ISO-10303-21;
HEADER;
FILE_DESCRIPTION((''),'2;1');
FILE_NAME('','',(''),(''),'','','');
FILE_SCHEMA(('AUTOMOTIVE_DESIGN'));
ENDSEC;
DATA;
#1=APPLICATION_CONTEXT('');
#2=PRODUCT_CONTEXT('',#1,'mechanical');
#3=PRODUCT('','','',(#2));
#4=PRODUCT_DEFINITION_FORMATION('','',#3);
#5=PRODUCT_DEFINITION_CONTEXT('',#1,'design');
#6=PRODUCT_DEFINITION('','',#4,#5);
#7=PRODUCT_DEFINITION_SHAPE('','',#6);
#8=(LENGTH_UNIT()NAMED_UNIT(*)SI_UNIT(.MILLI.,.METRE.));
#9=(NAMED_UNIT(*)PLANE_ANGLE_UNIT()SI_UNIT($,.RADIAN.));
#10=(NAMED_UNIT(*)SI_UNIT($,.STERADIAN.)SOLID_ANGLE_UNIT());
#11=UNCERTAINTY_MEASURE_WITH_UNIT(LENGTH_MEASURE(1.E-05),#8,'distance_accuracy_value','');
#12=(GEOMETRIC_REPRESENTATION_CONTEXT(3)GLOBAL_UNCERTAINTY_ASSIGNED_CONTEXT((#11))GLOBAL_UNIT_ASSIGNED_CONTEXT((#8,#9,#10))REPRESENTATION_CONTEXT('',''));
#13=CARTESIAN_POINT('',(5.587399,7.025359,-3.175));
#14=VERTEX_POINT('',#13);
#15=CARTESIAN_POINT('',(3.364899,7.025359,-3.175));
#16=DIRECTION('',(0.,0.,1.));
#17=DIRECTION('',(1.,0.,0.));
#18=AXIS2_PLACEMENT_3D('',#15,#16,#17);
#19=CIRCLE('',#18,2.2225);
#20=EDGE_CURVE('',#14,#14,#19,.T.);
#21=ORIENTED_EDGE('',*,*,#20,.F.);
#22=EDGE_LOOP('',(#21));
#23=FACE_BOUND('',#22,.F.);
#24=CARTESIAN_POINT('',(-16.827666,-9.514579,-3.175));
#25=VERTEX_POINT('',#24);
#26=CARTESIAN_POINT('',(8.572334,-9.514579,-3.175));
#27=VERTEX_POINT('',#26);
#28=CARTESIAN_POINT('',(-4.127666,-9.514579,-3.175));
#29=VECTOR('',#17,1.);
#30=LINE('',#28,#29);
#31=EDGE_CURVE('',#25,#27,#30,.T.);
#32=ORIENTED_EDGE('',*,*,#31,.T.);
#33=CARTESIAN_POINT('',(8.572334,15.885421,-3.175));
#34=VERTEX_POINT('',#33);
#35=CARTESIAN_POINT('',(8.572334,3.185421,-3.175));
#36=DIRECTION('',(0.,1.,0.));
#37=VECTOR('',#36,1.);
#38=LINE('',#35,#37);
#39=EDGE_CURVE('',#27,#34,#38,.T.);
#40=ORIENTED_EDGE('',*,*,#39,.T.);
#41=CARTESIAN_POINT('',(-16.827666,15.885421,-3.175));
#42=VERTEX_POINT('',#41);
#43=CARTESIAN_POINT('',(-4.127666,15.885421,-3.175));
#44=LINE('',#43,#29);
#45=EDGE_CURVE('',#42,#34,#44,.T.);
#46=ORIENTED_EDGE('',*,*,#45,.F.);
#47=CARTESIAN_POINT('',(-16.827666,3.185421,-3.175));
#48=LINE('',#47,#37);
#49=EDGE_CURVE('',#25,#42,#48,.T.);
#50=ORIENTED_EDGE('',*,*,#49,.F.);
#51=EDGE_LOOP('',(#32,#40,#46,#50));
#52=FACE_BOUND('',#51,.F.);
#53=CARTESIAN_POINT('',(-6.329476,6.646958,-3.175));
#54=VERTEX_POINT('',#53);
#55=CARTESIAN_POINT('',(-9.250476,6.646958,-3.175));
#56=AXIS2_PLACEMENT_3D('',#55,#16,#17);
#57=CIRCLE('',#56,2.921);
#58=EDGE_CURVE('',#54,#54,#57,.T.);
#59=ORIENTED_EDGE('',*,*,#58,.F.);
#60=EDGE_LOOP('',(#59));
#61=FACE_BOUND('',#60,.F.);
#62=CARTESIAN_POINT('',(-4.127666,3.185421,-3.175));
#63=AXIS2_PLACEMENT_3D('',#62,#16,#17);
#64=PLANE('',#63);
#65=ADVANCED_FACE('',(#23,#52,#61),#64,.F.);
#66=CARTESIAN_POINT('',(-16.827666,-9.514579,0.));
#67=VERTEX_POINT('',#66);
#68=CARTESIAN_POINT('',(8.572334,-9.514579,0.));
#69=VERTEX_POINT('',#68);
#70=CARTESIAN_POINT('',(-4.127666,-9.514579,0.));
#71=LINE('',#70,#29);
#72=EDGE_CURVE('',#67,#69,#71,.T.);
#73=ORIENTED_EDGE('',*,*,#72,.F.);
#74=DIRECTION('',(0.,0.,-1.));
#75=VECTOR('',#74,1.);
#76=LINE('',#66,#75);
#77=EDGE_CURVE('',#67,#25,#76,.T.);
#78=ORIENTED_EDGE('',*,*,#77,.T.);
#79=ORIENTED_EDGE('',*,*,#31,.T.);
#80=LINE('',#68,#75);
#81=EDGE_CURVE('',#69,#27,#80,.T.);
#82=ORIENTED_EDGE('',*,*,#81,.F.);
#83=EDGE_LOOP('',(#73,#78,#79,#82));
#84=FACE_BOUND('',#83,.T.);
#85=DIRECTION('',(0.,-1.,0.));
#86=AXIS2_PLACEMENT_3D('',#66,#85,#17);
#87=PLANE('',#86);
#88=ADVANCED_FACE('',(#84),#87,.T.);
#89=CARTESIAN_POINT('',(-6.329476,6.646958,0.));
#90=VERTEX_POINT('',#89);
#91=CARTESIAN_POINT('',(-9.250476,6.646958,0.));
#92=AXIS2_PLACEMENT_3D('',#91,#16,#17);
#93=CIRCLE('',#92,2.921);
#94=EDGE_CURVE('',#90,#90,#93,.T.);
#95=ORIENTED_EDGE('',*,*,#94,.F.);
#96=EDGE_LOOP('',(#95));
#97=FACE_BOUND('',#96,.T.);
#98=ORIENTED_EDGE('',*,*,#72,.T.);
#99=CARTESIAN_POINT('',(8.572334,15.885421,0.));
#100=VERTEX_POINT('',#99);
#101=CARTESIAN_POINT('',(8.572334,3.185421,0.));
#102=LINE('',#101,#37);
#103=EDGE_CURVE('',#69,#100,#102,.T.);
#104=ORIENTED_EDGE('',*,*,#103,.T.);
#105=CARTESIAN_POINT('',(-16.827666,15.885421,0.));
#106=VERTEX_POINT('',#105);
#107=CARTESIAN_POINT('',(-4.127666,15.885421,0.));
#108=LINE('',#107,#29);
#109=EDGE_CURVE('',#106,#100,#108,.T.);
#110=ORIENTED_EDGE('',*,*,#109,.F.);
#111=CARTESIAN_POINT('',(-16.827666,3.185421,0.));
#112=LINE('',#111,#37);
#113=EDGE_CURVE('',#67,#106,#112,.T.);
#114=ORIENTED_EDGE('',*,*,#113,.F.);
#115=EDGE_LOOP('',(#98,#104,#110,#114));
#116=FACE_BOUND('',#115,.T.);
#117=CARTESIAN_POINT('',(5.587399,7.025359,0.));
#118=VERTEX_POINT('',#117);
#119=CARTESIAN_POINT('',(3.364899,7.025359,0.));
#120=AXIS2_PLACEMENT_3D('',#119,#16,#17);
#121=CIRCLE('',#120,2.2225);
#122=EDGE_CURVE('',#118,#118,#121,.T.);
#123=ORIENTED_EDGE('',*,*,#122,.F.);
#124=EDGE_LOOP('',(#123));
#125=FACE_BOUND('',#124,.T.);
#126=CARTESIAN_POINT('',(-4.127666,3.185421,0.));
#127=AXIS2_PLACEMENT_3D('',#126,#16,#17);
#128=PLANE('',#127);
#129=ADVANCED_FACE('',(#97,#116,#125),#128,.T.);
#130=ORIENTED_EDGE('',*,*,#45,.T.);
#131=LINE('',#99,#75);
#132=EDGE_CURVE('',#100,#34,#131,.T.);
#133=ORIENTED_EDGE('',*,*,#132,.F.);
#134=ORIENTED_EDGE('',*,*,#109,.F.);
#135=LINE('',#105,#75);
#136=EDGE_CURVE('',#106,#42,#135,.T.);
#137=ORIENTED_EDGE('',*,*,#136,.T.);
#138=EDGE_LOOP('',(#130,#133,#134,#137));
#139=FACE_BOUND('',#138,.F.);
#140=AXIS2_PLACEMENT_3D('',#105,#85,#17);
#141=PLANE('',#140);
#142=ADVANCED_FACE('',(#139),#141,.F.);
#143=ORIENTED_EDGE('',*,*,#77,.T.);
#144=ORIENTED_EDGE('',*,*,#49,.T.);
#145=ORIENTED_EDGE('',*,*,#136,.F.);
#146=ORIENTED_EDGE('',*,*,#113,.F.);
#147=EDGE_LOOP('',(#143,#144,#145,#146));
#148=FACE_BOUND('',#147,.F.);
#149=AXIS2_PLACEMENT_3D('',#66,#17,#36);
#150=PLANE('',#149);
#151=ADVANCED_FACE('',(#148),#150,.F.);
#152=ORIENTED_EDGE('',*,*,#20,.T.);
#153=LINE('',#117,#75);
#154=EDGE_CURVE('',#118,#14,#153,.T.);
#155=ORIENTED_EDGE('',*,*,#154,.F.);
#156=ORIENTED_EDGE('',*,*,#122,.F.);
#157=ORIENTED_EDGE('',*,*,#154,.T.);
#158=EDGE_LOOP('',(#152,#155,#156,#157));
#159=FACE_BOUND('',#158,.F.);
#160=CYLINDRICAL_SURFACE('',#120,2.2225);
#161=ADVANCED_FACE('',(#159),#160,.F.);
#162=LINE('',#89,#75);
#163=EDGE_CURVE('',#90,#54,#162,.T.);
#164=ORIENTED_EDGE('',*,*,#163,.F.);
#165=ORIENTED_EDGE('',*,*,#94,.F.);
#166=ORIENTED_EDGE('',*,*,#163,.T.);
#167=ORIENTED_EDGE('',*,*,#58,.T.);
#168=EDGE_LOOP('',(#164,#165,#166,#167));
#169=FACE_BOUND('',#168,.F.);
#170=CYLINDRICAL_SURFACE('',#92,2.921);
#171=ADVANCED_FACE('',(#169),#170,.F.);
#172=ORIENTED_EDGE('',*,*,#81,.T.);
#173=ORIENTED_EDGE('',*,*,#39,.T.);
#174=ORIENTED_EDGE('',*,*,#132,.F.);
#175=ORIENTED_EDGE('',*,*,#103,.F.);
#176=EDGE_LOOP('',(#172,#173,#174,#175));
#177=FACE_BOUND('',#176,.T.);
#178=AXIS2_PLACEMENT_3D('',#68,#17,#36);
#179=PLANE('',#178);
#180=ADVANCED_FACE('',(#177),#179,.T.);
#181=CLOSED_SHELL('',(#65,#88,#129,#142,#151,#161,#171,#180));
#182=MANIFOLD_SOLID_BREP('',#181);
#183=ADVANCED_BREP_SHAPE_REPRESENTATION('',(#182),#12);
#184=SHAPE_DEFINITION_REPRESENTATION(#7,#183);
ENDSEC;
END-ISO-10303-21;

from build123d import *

# Parameters (mm, degrees)
F0_W     = 25.4
F0_H     = 25.4
F0_R     = 2.921
F0_R_2   = 2.2225
F1_DEPTH = 3.175


# Not quite as in the source:
# - a feature names something its author has since deleted; it is built from what else it names


with BuildPart() as f1:
    # F0 (on Top) → F1 (new body)
    with BuildSketch(Plane.XY):
        with Locations((-4.1276658885, 3.1854207028)):
            Rectangle(F0_W, F0_H)
        with Locations((-9.2504761174, 6.6469578254)):
            Circle(F0_R, mode=Mode.SUBTRACT)
        with Locations((3.3648989856, 7.0253587247)):
            Circle(F0_R_2, mode=Mode.SUBTRACT)
    extrude(amount=-F1_DEPTH)


solid = f1.part
